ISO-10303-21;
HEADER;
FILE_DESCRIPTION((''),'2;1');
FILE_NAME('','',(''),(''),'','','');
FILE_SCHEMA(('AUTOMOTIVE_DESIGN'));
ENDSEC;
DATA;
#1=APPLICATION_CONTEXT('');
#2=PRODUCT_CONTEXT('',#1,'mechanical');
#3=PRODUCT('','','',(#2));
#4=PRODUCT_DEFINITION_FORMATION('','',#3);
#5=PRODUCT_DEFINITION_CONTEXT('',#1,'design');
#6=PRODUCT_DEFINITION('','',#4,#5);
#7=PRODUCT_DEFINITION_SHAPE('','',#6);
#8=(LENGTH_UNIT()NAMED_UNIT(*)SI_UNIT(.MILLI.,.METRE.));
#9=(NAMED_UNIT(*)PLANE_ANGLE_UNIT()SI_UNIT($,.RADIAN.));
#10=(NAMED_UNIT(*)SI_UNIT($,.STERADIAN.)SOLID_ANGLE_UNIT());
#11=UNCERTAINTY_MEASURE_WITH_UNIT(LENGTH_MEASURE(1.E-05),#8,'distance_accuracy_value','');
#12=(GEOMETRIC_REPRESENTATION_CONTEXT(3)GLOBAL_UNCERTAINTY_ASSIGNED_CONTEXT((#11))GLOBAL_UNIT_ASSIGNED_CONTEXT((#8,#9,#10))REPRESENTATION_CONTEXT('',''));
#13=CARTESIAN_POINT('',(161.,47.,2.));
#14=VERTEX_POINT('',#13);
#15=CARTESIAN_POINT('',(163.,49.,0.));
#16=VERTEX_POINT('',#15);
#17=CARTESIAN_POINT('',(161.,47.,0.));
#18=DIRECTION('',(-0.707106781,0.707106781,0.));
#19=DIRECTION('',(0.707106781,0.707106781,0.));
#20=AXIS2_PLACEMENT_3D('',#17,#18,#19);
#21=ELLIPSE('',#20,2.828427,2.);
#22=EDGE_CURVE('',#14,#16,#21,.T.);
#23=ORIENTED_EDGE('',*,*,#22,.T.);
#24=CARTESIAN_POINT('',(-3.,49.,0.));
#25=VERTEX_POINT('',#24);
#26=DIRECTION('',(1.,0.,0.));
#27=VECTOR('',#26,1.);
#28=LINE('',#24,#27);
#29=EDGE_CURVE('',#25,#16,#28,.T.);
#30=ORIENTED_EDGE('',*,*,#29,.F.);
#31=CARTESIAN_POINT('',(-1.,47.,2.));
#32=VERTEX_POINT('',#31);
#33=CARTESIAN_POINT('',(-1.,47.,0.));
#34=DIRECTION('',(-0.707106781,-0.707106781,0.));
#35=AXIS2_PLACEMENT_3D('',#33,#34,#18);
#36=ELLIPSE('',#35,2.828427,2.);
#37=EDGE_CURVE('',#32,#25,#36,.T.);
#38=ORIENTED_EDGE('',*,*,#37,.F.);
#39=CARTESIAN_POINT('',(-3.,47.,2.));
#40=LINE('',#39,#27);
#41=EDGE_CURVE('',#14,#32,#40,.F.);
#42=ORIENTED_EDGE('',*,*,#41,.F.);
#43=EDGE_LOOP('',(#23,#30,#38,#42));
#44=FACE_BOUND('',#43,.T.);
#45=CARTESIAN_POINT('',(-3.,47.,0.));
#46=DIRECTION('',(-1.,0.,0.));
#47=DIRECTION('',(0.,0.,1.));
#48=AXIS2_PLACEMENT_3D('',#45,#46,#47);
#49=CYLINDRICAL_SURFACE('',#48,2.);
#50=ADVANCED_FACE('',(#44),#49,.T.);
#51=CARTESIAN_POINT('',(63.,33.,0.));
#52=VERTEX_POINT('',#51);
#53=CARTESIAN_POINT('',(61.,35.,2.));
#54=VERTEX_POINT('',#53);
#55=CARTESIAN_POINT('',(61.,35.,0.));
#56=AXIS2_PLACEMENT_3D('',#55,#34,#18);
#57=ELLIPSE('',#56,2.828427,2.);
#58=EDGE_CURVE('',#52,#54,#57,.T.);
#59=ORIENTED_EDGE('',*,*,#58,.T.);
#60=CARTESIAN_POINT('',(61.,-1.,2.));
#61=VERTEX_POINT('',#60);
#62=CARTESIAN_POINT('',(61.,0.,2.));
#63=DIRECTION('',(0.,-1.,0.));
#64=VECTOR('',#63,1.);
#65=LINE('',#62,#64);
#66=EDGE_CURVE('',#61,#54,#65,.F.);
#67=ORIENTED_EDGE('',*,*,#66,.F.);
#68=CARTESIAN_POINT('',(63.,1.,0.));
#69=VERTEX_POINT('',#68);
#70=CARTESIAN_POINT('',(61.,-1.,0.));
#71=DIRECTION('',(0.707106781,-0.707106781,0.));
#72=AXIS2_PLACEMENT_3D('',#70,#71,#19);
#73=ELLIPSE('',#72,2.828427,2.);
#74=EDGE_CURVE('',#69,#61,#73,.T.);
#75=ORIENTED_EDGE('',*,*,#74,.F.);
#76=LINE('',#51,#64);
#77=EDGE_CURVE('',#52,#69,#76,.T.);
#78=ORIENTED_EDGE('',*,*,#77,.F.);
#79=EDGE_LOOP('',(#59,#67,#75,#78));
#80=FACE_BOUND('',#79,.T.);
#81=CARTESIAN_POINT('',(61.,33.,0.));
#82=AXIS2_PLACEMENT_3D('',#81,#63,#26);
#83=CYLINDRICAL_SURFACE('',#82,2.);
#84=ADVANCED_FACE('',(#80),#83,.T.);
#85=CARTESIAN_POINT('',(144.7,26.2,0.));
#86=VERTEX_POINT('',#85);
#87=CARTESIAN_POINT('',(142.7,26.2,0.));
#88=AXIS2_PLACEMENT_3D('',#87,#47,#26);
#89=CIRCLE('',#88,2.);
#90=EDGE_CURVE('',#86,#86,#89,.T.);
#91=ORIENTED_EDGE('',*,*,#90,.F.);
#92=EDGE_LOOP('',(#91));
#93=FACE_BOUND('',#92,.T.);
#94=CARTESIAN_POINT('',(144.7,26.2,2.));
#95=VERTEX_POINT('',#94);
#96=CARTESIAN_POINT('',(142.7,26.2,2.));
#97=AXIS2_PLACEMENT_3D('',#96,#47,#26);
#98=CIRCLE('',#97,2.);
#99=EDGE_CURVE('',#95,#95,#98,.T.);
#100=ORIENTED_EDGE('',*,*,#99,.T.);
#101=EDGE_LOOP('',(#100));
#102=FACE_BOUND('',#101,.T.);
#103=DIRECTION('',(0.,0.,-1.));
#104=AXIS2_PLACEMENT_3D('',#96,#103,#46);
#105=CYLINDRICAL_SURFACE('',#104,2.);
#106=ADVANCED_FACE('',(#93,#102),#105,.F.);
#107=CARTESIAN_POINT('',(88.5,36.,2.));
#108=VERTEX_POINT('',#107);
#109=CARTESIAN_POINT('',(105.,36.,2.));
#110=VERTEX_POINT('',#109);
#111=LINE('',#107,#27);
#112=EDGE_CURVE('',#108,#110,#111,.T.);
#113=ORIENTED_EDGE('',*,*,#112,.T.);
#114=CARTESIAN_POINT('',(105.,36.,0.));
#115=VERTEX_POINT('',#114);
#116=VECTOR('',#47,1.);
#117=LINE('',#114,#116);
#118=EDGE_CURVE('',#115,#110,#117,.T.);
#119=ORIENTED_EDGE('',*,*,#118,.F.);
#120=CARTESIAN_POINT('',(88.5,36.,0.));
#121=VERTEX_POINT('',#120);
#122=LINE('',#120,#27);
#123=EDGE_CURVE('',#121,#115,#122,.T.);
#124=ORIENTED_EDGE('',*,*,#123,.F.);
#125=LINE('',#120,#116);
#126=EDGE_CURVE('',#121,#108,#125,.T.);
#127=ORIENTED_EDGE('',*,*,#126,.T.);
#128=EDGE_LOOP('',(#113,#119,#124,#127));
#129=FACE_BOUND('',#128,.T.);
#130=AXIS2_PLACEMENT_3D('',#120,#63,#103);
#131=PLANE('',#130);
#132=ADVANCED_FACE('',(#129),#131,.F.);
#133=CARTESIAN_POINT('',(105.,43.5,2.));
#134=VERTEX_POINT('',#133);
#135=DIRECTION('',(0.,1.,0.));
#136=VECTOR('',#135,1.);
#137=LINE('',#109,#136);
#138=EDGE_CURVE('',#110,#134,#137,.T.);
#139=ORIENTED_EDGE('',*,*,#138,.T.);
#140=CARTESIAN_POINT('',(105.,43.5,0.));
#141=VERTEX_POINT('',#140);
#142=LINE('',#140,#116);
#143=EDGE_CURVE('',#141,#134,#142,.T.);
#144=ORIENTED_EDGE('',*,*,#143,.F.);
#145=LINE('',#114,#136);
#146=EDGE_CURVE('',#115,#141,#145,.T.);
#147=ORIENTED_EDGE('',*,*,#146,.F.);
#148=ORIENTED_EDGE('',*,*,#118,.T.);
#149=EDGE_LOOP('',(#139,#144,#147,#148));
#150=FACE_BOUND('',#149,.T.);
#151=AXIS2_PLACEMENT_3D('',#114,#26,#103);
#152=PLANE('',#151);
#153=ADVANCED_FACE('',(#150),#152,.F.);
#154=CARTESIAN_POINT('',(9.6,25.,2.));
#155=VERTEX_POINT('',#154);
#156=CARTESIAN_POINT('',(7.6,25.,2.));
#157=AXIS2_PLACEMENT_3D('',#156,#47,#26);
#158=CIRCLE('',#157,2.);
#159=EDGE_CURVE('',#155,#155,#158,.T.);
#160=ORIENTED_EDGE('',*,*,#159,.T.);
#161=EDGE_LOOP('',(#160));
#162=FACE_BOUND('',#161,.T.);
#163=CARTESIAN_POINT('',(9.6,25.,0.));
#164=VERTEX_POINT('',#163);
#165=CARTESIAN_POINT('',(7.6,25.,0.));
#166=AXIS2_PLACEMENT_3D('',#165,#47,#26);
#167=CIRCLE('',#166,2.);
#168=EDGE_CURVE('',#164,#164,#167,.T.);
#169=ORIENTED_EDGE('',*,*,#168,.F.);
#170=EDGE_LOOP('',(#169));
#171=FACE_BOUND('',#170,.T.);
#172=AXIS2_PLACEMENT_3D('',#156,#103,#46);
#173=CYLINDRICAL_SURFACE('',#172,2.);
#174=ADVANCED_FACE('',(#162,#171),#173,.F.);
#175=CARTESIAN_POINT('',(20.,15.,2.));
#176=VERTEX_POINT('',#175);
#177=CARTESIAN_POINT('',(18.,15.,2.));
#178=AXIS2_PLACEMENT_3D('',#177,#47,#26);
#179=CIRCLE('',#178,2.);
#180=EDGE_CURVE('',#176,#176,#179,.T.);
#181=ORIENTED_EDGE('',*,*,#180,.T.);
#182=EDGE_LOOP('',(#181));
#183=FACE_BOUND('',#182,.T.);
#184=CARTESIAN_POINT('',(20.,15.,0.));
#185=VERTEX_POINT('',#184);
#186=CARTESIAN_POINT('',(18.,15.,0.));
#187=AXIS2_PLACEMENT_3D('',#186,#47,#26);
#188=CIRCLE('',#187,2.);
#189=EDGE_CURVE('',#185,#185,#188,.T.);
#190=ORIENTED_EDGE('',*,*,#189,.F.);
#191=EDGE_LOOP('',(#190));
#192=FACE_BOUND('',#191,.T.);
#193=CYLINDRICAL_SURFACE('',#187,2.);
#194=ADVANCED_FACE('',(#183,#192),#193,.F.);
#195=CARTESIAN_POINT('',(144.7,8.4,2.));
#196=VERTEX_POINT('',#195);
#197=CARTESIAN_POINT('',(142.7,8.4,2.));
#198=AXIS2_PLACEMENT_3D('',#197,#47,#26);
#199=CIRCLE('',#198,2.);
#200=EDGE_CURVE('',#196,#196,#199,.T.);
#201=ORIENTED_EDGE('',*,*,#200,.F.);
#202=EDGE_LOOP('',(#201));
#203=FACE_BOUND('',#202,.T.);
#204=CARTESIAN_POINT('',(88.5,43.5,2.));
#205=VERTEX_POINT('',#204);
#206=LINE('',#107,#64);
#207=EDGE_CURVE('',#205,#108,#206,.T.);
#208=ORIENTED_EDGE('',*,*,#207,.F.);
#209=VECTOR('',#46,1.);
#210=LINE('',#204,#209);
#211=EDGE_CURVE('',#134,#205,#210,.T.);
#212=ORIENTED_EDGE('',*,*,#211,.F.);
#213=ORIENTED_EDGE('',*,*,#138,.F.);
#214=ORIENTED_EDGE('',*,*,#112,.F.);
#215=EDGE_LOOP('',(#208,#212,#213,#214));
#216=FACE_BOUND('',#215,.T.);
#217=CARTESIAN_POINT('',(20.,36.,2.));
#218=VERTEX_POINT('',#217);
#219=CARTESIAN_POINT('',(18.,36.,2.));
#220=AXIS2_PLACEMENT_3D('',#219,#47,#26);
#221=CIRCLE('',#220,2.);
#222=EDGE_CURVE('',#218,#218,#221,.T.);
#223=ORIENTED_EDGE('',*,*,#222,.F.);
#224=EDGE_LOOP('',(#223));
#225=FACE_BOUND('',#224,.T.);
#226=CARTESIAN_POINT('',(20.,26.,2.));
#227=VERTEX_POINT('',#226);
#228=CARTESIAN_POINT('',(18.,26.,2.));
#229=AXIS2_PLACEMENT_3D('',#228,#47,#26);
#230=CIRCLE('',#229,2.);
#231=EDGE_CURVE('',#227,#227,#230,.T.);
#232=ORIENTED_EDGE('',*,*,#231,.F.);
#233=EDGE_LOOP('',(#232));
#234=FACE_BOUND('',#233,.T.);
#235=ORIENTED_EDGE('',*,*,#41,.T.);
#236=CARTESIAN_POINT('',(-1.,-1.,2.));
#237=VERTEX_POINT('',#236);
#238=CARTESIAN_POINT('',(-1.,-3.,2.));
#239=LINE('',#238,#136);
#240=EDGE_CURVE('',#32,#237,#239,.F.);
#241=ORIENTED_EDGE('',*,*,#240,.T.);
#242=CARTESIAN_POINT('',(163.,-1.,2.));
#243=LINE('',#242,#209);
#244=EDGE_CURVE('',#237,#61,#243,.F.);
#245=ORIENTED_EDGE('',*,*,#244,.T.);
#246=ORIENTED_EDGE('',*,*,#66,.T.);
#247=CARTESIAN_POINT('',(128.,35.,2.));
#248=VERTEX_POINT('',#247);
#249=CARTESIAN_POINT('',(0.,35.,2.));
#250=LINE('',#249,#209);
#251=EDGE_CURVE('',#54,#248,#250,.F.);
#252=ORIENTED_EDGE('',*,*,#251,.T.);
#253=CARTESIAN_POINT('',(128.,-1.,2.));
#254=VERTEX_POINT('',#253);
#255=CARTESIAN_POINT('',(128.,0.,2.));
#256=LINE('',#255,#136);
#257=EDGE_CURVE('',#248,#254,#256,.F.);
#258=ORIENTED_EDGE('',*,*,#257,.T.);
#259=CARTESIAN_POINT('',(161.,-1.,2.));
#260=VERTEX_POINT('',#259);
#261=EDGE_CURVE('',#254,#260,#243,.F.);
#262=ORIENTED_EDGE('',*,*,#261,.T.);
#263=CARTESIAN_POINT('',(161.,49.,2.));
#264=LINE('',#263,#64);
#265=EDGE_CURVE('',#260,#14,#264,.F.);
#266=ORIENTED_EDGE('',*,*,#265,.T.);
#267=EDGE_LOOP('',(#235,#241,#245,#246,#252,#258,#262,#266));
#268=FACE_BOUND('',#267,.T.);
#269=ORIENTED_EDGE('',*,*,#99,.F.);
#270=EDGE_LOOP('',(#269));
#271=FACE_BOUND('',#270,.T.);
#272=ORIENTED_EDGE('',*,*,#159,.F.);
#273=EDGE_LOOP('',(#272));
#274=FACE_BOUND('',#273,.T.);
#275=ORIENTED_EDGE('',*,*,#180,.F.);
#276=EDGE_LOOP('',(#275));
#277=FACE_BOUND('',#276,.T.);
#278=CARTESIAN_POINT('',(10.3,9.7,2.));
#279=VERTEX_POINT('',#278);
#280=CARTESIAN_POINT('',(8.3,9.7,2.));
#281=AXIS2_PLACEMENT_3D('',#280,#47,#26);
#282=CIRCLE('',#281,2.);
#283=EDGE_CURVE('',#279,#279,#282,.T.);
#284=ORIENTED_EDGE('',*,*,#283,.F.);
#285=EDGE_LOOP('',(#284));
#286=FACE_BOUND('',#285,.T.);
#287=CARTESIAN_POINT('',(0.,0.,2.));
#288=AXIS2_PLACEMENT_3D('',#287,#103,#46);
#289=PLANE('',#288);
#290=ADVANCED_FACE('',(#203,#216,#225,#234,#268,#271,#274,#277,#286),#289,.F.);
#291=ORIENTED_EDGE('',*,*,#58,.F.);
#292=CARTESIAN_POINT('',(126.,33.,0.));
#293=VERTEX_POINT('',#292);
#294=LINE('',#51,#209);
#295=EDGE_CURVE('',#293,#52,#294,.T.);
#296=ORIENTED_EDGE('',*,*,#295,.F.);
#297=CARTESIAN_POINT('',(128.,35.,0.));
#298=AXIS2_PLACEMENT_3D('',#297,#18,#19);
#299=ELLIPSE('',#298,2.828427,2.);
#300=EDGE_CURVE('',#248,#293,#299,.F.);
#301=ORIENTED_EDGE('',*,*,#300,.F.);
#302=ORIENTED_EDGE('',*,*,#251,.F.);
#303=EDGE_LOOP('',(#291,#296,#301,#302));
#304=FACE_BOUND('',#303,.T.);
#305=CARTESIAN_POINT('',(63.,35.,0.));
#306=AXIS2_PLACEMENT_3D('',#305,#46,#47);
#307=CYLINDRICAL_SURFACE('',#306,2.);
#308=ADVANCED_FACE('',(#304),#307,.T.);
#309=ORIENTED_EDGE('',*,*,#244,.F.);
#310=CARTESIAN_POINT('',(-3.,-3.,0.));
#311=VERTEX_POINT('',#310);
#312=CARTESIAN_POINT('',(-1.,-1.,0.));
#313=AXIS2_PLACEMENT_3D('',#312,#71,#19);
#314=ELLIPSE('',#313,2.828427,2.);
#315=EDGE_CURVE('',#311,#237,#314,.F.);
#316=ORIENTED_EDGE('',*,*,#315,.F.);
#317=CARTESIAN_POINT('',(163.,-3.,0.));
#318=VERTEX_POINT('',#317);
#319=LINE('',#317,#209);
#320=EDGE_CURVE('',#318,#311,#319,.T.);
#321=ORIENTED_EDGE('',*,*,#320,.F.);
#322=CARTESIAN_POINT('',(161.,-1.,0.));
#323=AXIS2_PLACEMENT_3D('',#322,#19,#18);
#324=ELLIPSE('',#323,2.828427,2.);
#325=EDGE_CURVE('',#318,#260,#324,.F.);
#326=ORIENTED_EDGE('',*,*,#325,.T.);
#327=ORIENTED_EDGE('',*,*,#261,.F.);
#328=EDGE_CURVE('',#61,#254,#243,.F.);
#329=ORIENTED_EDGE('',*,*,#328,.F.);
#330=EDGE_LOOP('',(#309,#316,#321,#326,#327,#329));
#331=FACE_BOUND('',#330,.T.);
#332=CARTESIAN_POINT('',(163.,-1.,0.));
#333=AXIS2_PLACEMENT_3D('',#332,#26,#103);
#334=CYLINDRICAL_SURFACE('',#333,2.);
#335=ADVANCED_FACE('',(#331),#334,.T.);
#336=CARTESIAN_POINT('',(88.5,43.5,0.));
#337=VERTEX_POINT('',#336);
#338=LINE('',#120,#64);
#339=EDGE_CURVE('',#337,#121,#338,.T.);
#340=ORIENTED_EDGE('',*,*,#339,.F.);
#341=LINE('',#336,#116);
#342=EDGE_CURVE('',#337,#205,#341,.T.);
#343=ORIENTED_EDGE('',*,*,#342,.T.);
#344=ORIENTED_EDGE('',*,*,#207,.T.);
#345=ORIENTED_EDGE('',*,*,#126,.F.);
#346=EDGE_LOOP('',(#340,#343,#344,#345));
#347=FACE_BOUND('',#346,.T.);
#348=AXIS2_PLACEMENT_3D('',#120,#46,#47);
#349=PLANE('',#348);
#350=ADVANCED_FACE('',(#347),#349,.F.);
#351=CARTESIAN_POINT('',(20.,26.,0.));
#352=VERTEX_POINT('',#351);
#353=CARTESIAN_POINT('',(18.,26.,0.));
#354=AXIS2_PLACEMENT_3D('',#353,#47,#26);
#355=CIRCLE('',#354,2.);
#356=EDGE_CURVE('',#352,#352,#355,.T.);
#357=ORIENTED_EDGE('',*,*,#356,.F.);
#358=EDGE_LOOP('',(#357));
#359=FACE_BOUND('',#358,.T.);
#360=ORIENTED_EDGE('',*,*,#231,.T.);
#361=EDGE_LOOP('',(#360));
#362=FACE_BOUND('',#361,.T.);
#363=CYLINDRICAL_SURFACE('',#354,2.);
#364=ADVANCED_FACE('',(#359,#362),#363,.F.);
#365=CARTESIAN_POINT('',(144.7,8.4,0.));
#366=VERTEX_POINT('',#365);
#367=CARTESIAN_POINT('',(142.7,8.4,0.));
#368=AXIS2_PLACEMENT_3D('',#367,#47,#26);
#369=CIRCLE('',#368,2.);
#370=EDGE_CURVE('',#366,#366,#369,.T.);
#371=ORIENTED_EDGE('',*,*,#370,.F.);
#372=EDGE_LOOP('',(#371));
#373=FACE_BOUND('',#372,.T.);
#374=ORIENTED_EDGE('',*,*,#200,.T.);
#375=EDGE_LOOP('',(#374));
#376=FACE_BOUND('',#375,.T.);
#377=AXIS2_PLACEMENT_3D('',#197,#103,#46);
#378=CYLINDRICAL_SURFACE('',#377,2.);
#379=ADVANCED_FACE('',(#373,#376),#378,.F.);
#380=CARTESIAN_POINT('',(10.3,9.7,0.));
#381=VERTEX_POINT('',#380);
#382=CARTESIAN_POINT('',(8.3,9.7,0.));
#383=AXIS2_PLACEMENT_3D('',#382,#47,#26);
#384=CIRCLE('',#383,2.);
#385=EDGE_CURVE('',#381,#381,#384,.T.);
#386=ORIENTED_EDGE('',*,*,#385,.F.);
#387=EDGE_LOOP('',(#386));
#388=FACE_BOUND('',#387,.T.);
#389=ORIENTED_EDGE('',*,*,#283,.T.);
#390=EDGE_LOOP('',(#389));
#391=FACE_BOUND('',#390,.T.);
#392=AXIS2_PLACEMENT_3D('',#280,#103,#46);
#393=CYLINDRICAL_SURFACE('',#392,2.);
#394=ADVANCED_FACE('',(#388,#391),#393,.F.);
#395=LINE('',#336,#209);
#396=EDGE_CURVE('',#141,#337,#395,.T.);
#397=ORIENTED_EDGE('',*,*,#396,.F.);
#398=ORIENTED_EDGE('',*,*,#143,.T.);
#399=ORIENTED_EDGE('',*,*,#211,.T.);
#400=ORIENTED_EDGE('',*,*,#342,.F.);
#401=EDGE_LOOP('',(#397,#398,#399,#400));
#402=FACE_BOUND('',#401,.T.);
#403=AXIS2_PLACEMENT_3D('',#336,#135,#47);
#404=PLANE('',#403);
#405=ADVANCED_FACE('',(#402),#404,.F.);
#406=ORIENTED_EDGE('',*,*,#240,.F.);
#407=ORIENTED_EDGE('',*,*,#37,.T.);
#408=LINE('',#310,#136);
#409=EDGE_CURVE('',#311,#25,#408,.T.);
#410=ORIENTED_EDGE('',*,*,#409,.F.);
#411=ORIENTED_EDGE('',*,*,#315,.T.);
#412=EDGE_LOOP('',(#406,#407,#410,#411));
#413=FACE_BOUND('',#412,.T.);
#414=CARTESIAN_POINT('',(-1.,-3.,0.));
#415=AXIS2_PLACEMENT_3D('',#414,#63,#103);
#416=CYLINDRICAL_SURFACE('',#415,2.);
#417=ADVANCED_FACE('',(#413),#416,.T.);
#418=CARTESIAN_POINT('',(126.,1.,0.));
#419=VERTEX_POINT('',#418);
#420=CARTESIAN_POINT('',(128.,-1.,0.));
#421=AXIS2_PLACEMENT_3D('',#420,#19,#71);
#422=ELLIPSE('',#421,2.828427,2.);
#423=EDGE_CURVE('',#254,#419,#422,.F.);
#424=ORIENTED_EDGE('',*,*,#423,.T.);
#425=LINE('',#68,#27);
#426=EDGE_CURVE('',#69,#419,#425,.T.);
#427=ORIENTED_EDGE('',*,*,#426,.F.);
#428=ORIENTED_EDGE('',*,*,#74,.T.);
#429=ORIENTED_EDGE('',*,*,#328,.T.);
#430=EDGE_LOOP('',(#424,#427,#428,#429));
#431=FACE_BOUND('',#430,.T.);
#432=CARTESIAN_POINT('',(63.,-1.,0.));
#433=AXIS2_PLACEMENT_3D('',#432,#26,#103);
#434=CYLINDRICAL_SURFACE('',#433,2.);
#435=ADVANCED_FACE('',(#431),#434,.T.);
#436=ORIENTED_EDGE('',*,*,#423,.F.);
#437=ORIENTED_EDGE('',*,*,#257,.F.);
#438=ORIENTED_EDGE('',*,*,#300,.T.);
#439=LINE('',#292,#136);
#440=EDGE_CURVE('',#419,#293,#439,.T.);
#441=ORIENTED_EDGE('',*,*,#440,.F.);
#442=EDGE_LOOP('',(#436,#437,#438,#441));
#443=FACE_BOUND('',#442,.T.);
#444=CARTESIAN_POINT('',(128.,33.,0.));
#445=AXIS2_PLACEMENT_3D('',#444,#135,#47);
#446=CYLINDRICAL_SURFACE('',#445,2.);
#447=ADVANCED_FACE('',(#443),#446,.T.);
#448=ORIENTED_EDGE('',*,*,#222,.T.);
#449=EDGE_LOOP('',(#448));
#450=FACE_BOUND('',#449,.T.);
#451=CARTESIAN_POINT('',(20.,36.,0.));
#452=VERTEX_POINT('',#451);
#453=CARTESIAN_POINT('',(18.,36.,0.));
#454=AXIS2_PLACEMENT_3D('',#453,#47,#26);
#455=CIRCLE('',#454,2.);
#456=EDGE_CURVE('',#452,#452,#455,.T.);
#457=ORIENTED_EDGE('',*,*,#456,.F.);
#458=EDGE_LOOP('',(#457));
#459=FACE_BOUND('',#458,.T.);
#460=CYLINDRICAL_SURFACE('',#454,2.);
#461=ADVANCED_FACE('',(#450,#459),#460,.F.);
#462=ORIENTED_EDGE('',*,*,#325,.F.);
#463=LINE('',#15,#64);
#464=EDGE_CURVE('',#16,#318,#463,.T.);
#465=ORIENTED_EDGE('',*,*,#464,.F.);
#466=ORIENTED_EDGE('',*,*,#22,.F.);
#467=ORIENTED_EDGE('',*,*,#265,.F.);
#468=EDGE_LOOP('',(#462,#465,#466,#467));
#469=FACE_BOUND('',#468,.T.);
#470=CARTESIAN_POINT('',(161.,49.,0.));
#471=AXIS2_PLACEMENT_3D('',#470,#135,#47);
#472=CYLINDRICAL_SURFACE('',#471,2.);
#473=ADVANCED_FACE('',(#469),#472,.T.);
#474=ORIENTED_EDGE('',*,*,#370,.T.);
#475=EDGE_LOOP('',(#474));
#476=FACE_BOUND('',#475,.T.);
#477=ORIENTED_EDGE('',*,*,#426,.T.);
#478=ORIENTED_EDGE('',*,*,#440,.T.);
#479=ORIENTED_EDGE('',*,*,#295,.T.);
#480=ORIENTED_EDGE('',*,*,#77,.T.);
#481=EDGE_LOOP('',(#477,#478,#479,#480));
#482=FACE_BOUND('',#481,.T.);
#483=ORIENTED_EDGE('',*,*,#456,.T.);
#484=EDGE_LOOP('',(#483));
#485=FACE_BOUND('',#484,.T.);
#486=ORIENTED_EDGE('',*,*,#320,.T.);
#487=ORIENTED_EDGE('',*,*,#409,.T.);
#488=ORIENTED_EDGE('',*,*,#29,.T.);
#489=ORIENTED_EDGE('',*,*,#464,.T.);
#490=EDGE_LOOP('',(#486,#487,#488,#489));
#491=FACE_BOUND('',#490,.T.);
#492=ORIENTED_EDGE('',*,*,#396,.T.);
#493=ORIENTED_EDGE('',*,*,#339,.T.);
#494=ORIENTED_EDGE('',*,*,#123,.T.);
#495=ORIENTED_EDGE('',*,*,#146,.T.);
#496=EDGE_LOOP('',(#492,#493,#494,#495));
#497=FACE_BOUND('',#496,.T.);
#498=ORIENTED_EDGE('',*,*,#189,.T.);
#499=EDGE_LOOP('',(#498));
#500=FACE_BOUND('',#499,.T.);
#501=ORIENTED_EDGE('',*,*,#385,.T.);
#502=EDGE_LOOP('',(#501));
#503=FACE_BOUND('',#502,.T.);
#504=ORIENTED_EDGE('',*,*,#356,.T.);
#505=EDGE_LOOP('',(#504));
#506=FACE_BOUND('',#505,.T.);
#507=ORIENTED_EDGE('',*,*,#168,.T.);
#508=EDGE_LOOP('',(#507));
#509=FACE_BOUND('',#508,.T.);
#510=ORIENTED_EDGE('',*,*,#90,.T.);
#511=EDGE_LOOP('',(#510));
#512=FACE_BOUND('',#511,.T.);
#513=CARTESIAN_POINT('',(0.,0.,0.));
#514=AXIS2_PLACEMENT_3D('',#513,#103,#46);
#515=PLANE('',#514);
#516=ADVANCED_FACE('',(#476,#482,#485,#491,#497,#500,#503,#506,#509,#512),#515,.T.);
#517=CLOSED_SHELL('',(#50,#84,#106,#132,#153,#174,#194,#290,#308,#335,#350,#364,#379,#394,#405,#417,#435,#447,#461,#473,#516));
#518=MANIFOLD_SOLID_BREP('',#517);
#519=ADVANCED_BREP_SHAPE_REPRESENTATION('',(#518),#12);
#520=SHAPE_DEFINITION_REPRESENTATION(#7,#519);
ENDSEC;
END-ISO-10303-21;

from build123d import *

# Parameters (mm, degrees)
SKICA1_W                 = 160
SKICA1_H                 = 46
SKICA1_R                 = 2
P_IDAT_VYSUNUT_M1_DEPTH  = 2
SKICA2_W                 = 166
SKICA2_H                 = 52
SKICA2_W_2               = 160
SKICA2_H_2               = 46
P_IDAT_VYSUNUT_M4_DEPTH  = 2
SKICA3_W                 = 63
SKICA3_H                 = 32
ODEBRAT_VYSUNUT_M1_DEPTH = 171.217507913
SKICA4_W                 = 16.5
SKICA4_H                 = 7.5
ODEBRAT_VYSUNUT_M2_DEPTH = 171.217507913
ZAOBLIT14_R              = 2
SKICA5_R                 = 2
ODEBRAT_VYSUNUT_M3_DEPTH = 171.217507913
ZAOBLIT16_R              = 2


with BuildPart() as part:
    # Skica1 → Přidat vysunutím1 (new body)
    with BuildSketch(Plane.XY):
        with Locations((80, 23)):
            Rectangle(SKICA1_W, SKICA1_H)
        with Locations((7.6, 25)):
            Circle(SKICA1_R, mode=Mode.SUBTRACT)
        with Locations((8.3, 9.7)):
            Circle(SKICA1_R, mode=Mode.SUBTRACT)
        with Locations((142.7, 26.2)):
            Circle(SKICA1_R, mode=Mode.SUBTRACT)
        with Locations((142.7, 8.4)):
            Circle(SKICA1_R, mode=Mode.SUBTRACT)
    extrude(amount=P_IDAT_VYSUNUT_M1_DEPTH)

    # Skica2 → Přidat vysunutím4 (add)
    with BuildSketch(Plane(origin=(0, 0, 0), x_dir=(-1, 0, 0), z_dir=(0, 0, -1))):
        with Locations((-80, 23)):
            Rectangle(SKICA2_W, SKICA2_H)
        with Locations((-80, 23)):
            Rectangle(SKICA2_W_2, SKICA2_H_2, mode=Mode.SUBTRACT)
    extrude(amount=-P_IDAT_VYSUNUT_M4_DEPTH)

    # Skica3 → Odebrat vysunutím1 (cut, through all)
    with BuildSketch(Plane.XY.offset(2)):
        with Locations((94.5, 17)):
            Rectangle(SKICA3_W, SKICA3_H)
    extrude(amount=-ODEBRAT_VYSUNUT_M1_DEPTH, mode=Mode.SUBTRACT)

    # Skica4 → Odebrat vysunutím2 (cut, through all)
    with BuildSketch(Plane.XY.offset(2)):
        with Locations((96.75, 39.75)):
            Rectangle(SKICA4_W, SKICA4_H)
    extrude(amount=-ODEBRAT_VYSUNUT_M2_DEPTH, mode=Mode.SUBTRACT)

    # Zaoblit14
    zaoblit14_edges = [part.edges().sort_by_distance(p)[0] for p in [
        (-3, 23, 2),
        (80, 49, 2),
        (80, -3, 2),
        (163, 23, 2),
    ]]
    fillet(zaoblit14_edges, radius=ZAOBLIT14_R - 0.0001)  # a hair under: the kernel refuses the full size

    # Skica5 → Odebrat vysunutím3 (cut, through all)
    with BuildSketch(Plane.XY.offset(2)):
        with Locations((18, 15)):
            Circle(SKICA5_R)
        with Locations((18, 26)):
            Circle(SKICA5_R)
        with Locations((18, 36)):
            Circle(SKICA5_R)
    extrude(amount=-ODEBRAT_VYSUNUT_M3_DEPTH, mode=Mode.SUBTRACT)

    # Zaoblit16
    zaoblit16_edges = [part.edges().sort_by_distance(p)[0] for p in [
        (94.5, 1, 2),
        (126, 17, 2),
        (94.5, 33, 2),
        (63, 17, 2),
    ]]
    fillet(zaoblit16_edges, radius=ZAOBLIT16_R - 0.0001)  # a hair under: the kernel refuses the full size


solid = part.part
